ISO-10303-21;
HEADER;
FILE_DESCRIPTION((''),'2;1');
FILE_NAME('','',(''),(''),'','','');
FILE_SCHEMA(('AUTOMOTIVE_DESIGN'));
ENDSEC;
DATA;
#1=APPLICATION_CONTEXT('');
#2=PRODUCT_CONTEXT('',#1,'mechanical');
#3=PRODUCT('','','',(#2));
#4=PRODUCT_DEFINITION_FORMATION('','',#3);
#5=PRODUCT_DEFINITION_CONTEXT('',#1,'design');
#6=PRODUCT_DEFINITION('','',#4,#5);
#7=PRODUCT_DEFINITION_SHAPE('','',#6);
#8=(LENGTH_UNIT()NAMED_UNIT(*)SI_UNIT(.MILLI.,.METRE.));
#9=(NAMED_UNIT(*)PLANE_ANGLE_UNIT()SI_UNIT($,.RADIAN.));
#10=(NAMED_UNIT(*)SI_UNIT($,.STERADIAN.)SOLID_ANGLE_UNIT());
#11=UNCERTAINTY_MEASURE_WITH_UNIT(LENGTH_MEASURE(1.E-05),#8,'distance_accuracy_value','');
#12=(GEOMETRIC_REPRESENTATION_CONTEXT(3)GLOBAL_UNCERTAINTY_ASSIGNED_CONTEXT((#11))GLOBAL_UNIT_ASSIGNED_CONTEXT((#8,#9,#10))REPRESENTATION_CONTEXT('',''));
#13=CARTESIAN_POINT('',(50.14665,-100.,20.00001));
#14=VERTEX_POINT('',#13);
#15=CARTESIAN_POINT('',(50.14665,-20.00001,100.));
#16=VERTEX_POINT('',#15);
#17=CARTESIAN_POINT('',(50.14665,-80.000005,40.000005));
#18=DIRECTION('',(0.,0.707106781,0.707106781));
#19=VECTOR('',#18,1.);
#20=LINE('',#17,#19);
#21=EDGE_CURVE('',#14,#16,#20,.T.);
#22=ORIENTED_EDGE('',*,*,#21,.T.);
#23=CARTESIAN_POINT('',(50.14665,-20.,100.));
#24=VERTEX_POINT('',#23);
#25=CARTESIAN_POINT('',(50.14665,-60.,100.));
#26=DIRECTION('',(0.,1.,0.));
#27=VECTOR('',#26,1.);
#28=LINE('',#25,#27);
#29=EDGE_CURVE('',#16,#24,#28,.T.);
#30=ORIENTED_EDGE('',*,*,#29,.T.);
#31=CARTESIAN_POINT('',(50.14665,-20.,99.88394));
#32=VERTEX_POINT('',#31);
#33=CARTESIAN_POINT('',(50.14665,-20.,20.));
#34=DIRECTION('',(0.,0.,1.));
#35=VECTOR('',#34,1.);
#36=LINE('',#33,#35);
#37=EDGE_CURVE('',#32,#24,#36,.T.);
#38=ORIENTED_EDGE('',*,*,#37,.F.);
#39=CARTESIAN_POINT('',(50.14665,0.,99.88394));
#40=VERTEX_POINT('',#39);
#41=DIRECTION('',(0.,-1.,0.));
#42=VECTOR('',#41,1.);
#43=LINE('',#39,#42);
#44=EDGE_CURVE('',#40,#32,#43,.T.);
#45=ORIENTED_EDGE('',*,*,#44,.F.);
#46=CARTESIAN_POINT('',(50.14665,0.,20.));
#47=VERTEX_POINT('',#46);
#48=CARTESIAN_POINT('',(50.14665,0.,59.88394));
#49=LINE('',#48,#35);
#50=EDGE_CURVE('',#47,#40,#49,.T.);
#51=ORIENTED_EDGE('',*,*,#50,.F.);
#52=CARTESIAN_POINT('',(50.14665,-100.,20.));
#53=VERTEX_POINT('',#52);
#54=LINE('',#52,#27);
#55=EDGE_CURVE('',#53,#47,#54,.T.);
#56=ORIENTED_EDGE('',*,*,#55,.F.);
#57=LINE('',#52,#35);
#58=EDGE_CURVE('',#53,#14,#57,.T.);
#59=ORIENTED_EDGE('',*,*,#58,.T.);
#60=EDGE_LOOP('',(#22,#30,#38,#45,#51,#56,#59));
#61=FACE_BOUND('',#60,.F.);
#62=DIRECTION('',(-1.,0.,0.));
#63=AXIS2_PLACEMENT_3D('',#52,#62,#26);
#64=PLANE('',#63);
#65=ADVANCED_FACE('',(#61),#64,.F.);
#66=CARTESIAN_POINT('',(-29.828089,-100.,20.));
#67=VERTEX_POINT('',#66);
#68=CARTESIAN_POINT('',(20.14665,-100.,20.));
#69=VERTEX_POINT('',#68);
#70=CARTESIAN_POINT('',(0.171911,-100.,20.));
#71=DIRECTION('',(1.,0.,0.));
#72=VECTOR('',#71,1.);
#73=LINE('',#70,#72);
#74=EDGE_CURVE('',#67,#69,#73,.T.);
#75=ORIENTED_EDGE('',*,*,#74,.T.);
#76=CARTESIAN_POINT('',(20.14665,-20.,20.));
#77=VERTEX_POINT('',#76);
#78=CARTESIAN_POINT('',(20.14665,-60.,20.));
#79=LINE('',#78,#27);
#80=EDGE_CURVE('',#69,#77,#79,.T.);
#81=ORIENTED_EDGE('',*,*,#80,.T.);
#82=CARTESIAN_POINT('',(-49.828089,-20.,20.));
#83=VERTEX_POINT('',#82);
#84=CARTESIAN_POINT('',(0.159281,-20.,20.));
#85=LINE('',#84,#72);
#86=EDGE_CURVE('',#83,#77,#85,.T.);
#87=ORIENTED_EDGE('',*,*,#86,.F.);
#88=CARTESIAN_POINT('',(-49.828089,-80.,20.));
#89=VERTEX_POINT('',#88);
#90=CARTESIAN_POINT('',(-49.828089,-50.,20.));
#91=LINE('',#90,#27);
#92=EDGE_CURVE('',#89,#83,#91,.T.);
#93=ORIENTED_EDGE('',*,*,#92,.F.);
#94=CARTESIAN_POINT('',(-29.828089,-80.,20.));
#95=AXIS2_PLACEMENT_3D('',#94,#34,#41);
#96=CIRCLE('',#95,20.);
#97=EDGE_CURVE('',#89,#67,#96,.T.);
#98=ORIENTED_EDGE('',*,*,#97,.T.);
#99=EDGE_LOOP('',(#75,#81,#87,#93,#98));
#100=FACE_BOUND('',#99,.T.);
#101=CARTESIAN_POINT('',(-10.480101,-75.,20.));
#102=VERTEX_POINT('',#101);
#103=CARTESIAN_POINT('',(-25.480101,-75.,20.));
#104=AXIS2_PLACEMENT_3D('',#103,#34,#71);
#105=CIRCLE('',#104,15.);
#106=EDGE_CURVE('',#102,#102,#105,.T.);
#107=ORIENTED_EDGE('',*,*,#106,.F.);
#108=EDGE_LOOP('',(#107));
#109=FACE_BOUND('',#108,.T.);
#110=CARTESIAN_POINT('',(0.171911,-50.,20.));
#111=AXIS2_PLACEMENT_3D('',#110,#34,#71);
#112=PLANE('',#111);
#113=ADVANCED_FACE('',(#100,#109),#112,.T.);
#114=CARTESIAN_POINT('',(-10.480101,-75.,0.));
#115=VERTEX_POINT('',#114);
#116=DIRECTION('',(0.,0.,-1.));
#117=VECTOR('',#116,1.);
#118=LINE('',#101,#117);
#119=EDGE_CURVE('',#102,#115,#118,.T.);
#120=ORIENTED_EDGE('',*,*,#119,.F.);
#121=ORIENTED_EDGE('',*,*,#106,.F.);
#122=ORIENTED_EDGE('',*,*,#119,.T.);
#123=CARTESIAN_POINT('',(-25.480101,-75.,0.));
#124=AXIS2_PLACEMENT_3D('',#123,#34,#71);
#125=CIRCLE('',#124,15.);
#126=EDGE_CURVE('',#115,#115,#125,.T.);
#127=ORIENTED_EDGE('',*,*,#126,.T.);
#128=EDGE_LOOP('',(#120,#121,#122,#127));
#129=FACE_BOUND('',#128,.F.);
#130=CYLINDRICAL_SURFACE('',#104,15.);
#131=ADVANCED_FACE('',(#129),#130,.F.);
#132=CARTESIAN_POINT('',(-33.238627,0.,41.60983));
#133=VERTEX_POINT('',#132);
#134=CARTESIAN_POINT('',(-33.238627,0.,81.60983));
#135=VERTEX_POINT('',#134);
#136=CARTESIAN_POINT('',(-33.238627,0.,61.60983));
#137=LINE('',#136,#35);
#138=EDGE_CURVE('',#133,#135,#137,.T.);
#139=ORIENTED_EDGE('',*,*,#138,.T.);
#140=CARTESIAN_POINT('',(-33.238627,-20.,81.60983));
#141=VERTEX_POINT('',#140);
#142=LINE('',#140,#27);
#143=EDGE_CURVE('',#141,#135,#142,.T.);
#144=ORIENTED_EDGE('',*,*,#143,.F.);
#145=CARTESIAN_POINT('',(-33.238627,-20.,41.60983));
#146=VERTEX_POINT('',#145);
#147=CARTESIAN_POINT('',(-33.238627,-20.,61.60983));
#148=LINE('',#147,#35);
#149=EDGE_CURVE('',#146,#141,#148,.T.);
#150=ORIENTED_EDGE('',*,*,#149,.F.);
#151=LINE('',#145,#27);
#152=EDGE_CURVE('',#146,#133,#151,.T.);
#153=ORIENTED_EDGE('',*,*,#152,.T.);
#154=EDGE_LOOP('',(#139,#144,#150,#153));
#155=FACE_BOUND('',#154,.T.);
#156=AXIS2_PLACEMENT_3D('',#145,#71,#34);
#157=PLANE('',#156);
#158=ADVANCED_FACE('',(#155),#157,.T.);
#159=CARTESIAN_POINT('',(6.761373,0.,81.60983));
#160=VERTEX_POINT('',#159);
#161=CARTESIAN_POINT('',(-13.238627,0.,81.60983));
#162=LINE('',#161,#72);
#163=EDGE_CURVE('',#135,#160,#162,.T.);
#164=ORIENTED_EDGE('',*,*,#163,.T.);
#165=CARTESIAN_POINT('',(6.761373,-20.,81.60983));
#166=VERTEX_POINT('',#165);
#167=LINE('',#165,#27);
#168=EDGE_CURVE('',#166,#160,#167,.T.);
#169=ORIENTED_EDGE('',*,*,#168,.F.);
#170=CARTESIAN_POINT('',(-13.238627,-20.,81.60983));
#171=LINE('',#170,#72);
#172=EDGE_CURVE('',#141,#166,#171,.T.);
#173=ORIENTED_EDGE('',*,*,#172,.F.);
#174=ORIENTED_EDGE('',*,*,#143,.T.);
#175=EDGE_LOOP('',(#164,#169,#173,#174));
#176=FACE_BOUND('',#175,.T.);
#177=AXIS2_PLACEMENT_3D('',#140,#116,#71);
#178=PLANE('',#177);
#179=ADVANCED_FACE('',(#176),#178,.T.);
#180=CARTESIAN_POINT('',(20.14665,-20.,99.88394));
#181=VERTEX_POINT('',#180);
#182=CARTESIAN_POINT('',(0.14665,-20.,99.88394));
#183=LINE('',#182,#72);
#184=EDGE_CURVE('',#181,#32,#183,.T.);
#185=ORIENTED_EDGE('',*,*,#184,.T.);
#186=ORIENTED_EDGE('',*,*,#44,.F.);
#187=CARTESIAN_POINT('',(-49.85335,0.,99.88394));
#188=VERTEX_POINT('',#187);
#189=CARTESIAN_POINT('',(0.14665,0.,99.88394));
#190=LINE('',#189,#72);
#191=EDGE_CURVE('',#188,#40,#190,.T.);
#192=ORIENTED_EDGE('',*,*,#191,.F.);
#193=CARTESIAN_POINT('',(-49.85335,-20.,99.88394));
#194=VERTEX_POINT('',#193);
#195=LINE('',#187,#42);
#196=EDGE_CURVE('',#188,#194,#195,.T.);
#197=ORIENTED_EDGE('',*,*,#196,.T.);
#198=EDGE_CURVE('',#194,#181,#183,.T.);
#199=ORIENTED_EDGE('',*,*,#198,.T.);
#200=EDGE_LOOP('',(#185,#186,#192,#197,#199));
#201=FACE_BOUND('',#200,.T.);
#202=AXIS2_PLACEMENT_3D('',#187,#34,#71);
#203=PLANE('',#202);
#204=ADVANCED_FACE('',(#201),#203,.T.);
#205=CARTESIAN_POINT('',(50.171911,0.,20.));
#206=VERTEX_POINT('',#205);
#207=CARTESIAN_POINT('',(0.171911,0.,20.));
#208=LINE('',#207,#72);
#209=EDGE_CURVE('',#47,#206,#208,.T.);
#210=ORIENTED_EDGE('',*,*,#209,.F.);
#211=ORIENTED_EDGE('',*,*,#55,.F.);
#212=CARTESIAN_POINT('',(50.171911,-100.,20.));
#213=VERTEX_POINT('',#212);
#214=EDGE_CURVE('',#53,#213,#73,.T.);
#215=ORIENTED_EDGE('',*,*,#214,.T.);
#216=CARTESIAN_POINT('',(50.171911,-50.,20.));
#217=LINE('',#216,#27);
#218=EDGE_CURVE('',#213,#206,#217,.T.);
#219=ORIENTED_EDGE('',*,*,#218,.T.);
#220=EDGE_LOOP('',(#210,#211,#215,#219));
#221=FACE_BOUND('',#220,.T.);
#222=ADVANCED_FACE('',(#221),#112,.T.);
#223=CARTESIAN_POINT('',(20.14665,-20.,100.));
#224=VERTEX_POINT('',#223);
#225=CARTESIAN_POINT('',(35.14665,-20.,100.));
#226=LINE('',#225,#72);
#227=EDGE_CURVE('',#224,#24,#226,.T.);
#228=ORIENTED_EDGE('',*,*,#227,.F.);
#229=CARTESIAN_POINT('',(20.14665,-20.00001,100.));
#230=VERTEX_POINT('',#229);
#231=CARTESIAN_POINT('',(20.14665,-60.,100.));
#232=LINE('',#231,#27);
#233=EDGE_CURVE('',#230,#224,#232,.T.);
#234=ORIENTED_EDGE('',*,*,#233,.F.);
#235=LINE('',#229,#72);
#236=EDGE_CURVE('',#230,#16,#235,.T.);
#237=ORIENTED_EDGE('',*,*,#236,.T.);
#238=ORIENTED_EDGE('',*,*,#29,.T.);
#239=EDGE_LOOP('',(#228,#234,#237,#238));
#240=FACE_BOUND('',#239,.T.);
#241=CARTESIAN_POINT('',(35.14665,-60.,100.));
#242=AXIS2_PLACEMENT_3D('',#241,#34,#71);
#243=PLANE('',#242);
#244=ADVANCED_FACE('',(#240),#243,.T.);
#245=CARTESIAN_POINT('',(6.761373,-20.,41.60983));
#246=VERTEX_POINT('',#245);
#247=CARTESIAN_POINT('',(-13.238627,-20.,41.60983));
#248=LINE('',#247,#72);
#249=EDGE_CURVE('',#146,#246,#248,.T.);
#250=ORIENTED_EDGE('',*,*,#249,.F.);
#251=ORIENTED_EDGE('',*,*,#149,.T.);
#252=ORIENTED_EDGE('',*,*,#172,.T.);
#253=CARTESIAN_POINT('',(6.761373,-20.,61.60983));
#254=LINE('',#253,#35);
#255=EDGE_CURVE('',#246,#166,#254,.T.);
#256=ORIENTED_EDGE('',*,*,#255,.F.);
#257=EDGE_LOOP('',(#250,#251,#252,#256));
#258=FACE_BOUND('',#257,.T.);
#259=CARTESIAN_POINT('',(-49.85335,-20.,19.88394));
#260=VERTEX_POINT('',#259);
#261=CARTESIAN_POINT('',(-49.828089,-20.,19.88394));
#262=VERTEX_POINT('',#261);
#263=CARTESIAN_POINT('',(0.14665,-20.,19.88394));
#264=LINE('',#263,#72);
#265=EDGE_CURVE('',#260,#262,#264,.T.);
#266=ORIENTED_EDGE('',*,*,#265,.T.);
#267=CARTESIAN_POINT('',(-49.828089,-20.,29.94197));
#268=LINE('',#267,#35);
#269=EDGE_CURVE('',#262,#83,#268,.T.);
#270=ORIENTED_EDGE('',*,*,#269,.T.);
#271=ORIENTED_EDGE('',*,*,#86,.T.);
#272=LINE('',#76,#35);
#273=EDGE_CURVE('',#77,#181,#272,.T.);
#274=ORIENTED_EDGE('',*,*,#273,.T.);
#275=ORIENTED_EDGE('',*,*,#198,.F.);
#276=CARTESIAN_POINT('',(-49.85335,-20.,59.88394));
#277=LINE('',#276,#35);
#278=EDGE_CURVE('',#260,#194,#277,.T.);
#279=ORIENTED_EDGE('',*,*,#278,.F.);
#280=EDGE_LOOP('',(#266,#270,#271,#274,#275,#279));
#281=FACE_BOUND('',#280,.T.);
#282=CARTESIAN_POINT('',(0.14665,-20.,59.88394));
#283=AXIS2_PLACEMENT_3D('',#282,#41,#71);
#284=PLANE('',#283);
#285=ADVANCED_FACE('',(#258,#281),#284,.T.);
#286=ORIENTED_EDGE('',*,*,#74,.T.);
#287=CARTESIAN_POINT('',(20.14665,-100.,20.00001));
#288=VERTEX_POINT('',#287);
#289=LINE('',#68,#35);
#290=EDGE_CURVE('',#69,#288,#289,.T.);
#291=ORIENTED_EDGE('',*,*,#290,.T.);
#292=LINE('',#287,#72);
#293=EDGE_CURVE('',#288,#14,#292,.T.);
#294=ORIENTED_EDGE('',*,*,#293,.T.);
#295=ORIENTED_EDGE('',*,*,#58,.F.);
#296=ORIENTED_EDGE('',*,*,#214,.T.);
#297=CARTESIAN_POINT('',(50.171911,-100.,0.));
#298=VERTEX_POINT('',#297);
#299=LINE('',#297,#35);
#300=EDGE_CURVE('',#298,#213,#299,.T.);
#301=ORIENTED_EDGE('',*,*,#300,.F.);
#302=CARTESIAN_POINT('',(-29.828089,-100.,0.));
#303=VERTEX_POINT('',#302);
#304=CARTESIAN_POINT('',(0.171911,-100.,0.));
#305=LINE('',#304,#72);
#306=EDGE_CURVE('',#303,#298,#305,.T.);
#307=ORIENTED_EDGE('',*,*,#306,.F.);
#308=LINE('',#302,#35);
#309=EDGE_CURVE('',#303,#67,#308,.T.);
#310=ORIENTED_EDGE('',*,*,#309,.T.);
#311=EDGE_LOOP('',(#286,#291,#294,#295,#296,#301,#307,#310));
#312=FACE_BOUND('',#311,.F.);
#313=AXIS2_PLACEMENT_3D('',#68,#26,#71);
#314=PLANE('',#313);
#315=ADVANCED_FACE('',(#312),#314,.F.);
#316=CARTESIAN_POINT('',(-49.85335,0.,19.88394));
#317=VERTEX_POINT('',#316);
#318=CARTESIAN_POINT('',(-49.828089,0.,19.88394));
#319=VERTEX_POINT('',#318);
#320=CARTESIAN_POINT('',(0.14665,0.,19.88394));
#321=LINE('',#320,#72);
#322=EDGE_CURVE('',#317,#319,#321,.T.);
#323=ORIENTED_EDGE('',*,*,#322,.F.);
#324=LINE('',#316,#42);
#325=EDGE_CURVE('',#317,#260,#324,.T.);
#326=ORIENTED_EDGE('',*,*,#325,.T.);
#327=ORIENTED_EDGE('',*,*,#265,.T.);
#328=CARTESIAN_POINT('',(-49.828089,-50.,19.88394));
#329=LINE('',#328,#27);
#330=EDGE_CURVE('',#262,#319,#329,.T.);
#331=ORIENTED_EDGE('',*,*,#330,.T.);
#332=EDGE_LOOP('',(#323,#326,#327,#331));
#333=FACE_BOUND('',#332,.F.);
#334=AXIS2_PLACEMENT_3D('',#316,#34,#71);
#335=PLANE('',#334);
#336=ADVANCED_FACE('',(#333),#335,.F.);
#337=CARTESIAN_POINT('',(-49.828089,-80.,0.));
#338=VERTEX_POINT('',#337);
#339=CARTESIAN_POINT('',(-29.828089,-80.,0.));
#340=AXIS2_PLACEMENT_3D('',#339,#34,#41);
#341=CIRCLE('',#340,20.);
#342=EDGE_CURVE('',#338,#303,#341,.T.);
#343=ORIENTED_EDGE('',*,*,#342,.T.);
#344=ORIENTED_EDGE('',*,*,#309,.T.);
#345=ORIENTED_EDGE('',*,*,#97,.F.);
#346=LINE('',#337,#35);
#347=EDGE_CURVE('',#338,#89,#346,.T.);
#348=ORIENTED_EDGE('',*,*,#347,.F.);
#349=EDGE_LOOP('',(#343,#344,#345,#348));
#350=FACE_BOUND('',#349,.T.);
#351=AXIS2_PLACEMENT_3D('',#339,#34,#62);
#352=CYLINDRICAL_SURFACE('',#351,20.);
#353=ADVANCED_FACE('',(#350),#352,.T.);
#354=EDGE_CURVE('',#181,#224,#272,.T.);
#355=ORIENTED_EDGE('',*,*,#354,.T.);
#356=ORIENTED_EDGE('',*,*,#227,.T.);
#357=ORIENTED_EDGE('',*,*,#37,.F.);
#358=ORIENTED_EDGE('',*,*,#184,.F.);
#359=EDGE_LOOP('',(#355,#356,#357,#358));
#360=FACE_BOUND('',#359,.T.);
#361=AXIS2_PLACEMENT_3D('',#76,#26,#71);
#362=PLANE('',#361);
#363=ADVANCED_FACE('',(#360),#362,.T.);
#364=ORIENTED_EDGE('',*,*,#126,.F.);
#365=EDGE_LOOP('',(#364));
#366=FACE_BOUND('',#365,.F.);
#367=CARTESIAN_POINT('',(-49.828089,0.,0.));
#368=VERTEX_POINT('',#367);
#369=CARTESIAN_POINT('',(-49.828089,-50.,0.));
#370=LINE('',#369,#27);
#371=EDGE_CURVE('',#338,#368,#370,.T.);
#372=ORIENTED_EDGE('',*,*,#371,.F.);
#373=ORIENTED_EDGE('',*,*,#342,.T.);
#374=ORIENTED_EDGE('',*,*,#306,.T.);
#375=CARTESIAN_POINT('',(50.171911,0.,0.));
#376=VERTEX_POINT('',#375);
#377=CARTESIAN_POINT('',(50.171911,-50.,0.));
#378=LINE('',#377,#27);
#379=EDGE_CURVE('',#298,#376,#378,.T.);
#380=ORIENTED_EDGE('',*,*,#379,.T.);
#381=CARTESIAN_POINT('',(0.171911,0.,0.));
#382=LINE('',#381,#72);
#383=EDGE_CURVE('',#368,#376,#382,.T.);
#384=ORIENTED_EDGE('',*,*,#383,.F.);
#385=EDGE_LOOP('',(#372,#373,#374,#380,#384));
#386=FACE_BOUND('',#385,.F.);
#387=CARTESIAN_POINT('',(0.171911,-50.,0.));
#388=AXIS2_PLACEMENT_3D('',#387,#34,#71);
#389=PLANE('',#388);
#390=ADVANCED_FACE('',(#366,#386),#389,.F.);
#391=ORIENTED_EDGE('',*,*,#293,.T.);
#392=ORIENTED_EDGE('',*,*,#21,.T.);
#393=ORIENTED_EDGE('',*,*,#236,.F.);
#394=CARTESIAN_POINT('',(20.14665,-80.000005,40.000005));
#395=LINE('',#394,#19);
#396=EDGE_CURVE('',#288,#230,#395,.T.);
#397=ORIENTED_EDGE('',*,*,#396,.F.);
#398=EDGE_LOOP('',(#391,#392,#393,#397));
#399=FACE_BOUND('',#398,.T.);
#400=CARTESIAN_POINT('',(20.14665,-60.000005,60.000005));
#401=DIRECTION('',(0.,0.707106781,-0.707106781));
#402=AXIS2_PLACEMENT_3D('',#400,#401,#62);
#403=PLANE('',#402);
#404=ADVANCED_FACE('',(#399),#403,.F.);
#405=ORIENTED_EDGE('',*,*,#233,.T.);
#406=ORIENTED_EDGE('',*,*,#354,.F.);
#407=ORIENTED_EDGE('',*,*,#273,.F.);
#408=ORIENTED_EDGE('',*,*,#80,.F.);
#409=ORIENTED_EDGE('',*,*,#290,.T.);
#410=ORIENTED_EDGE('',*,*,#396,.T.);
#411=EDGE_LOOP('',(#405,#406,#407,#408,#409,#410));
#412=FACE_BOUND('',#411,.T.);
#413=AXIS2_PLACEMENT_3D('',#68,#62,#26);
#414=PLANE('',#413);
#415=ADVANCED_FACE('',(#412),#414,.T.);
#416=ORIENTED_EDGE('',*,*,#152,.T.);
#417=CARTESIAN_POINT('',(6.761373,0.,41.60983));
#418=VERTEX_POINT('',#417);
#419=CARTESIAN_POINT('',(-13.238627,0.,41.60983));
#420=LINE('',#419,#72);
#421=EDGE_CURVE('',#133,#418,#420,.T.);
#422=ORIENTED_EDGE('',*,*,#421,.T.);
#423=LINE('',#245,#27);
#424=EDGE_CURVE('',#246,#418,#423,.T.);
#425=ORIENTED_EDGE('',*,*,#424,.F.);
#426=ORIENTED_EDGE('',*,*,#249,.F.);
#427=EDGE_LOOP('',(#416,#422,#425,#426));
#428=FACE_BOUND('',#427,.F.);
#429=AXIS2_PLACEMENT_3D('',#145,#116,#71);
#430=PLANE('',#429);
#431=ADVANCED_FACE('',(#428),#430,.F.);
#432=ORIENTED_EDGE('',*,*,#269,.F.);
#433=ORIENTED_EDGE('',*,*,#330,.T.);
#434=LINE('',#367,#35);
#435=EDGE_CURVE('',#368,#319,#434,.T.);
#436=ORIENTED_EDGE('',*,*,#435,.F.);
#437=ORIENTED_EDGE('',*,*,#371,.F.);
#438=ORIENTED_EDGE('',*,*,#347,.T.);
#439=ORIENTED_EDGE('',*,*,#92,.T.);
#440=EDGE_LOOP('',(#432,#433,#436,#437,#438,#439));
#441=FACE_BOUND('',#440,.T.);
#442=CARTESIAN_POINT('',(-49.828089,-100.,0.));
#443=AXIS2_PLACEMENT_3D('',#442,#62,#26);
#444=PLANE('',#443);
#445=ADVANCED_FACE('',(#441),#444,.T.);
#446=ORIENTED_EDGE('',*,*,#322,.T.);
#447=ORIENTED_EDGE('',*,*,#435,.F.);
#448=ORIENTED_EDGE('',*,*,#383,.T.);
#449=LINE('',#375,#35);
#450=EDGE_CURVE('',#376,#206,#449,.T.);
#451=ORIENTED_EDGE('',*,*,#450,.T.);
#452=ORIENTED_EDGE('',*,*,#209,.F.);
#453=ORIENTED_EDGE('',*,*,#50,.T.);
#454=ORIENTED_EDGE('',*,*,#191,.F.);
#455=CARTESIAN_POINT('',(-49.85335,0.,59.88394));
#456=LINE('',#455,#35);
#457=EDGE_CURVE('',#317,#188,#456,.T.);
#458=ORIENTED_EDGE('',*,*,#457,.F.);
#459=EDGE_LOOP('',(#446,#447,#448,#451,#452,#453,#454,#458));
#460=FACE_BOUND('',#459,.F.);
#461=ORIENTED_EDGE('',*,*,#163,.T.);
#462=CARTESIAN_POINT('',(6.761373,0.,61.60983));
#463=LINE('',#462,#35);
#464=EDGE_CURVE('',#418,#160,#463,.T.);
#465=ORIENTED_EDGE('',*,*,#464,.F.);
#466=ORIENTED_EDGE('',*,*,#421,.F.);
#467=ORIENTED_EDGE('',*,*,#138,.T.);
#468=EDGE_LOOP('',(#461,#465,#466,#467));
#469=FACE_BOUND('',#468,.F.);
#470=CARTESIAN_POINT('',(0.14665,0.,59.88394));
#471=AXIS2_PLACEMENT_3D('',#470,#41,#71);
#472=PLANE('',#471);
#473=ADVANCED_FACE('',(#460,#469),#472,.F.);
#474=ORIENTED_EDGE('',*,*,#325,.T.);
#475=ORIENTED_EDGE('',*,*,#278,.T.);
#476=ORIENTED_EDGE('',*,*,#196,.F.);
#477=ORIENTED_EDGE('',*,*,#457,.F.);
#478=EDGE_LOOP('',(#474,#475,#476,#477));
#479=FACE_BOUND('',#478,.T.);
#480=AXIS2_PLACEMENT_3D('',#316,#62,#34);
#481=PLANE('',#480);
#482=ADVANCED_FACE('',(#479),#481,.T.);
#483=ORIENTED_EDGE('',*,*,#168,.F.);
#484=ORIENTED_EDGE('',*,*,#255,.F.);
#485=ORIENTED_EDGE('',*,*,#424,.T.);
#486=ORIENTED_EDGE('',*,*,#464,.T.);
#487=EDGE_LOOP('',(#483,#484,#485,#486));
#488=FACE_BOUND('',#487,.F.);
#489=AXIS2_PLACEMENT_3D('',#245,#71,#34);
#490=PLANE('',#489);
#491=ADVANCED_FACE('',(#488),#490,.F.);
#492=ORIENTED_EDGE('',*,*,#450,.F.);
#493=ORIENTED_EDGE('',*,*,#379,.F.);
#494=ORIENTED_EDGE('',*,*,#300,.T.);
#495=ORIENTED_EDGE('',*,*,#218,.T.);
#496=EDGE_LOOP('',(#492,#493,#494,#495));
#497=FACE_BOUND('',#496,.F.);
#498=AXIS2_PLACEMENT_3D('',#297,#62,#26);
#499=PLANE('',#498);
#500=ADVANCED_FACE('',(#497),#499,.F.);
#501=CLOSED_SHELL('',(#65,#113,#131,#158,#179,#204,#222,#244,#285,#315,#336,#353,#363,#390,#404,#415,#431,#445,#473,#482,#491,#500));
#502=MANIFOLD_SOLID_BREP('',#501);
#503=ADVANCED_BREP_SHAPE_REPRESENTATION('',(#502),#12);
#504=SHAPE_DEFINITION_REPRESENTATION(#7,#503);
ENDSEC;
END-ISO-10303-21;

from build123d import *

# Parameters (mm, degrees)
F0_W      = 100
F0_H      = 100
F1_DEPTH  = 20
F2_W      = 100
F2_H      = 80
F3_DEPTH  = 20
F4_W      = 30
F4_H      = 80
F5_DEPTH  = 80
F6_R      = 20
F7_R      = 15
F8_DEPTH  = 20
F9_W      = 40
F9_H      = 40
F10_DEPTH = 20
F11_SIZE  = 79.99999


# Not quite as in the source:
# - a fillet or chamfer is up to 0.001 mm smaller than in the source, because OpenCascade refuses the exact size


with BuildPart() as f1:
    # F0 (on Top) → F1 (new body)
    with BuildSketch(Plane.XY):
        with Locations((0.1719114778, -50)):
            Rectangle(F0_W, F0_H)
    extrude(amount=F1_DEPTH)

    # F2 (on Front) → F3 (join)
    with BuildSketch(Plane.XZ):
        with Locations((0.1466497779, 59.8839402659)):
            Rectangle(F2_W, F2_H)
    extrude(amount=F3_DEPTH)

    # F4 (on face) → F5 (join)
    with BuildSketch(Plane.XY.offset(20)):
        with Locations((35.1466497779, -60)):
            Rectangle(F4_W, F4_H)
    extrude(amount=F5_DEPTH)

    # F6
    f6_edges = [f1.edges().sort_by_distance(p)[0] for p in [
        (-49.828089, -100, 10),
    ]]
    fillet(f6_edges, radius=F6_R)

    # F7 (on face) → F8 (cut)
    with BuildSketch(Plane.XY.offset(20)):
        with Locations((-25.480100885, -75)):
            Circle(F7_R)
    extrude(amount=-F8_DEPTH, mode=Mode.SUBTRACT)

    # F9 (on face) → F10 (cut)
    with BuildSketch(Plane.XZ.offset(20)):
        with Locations((-13.2386269793, 61.6098302603)):
            Rectangle(F9_W, F9_H)
    extrude(amount=-F10_DEPTH, mode=Mode.SUBTRACT)

    # F11 (size 80 in the source; OpenCascade refuses exactly that, so slightly less here)
    f11_edges = [f1.edges().sort_by_distance(p)[0] for p in [
        (35.14665, -100, 100),
    ]]
    chamfer(f11_edges, length=F11_SIZE)


solid = f1.part
